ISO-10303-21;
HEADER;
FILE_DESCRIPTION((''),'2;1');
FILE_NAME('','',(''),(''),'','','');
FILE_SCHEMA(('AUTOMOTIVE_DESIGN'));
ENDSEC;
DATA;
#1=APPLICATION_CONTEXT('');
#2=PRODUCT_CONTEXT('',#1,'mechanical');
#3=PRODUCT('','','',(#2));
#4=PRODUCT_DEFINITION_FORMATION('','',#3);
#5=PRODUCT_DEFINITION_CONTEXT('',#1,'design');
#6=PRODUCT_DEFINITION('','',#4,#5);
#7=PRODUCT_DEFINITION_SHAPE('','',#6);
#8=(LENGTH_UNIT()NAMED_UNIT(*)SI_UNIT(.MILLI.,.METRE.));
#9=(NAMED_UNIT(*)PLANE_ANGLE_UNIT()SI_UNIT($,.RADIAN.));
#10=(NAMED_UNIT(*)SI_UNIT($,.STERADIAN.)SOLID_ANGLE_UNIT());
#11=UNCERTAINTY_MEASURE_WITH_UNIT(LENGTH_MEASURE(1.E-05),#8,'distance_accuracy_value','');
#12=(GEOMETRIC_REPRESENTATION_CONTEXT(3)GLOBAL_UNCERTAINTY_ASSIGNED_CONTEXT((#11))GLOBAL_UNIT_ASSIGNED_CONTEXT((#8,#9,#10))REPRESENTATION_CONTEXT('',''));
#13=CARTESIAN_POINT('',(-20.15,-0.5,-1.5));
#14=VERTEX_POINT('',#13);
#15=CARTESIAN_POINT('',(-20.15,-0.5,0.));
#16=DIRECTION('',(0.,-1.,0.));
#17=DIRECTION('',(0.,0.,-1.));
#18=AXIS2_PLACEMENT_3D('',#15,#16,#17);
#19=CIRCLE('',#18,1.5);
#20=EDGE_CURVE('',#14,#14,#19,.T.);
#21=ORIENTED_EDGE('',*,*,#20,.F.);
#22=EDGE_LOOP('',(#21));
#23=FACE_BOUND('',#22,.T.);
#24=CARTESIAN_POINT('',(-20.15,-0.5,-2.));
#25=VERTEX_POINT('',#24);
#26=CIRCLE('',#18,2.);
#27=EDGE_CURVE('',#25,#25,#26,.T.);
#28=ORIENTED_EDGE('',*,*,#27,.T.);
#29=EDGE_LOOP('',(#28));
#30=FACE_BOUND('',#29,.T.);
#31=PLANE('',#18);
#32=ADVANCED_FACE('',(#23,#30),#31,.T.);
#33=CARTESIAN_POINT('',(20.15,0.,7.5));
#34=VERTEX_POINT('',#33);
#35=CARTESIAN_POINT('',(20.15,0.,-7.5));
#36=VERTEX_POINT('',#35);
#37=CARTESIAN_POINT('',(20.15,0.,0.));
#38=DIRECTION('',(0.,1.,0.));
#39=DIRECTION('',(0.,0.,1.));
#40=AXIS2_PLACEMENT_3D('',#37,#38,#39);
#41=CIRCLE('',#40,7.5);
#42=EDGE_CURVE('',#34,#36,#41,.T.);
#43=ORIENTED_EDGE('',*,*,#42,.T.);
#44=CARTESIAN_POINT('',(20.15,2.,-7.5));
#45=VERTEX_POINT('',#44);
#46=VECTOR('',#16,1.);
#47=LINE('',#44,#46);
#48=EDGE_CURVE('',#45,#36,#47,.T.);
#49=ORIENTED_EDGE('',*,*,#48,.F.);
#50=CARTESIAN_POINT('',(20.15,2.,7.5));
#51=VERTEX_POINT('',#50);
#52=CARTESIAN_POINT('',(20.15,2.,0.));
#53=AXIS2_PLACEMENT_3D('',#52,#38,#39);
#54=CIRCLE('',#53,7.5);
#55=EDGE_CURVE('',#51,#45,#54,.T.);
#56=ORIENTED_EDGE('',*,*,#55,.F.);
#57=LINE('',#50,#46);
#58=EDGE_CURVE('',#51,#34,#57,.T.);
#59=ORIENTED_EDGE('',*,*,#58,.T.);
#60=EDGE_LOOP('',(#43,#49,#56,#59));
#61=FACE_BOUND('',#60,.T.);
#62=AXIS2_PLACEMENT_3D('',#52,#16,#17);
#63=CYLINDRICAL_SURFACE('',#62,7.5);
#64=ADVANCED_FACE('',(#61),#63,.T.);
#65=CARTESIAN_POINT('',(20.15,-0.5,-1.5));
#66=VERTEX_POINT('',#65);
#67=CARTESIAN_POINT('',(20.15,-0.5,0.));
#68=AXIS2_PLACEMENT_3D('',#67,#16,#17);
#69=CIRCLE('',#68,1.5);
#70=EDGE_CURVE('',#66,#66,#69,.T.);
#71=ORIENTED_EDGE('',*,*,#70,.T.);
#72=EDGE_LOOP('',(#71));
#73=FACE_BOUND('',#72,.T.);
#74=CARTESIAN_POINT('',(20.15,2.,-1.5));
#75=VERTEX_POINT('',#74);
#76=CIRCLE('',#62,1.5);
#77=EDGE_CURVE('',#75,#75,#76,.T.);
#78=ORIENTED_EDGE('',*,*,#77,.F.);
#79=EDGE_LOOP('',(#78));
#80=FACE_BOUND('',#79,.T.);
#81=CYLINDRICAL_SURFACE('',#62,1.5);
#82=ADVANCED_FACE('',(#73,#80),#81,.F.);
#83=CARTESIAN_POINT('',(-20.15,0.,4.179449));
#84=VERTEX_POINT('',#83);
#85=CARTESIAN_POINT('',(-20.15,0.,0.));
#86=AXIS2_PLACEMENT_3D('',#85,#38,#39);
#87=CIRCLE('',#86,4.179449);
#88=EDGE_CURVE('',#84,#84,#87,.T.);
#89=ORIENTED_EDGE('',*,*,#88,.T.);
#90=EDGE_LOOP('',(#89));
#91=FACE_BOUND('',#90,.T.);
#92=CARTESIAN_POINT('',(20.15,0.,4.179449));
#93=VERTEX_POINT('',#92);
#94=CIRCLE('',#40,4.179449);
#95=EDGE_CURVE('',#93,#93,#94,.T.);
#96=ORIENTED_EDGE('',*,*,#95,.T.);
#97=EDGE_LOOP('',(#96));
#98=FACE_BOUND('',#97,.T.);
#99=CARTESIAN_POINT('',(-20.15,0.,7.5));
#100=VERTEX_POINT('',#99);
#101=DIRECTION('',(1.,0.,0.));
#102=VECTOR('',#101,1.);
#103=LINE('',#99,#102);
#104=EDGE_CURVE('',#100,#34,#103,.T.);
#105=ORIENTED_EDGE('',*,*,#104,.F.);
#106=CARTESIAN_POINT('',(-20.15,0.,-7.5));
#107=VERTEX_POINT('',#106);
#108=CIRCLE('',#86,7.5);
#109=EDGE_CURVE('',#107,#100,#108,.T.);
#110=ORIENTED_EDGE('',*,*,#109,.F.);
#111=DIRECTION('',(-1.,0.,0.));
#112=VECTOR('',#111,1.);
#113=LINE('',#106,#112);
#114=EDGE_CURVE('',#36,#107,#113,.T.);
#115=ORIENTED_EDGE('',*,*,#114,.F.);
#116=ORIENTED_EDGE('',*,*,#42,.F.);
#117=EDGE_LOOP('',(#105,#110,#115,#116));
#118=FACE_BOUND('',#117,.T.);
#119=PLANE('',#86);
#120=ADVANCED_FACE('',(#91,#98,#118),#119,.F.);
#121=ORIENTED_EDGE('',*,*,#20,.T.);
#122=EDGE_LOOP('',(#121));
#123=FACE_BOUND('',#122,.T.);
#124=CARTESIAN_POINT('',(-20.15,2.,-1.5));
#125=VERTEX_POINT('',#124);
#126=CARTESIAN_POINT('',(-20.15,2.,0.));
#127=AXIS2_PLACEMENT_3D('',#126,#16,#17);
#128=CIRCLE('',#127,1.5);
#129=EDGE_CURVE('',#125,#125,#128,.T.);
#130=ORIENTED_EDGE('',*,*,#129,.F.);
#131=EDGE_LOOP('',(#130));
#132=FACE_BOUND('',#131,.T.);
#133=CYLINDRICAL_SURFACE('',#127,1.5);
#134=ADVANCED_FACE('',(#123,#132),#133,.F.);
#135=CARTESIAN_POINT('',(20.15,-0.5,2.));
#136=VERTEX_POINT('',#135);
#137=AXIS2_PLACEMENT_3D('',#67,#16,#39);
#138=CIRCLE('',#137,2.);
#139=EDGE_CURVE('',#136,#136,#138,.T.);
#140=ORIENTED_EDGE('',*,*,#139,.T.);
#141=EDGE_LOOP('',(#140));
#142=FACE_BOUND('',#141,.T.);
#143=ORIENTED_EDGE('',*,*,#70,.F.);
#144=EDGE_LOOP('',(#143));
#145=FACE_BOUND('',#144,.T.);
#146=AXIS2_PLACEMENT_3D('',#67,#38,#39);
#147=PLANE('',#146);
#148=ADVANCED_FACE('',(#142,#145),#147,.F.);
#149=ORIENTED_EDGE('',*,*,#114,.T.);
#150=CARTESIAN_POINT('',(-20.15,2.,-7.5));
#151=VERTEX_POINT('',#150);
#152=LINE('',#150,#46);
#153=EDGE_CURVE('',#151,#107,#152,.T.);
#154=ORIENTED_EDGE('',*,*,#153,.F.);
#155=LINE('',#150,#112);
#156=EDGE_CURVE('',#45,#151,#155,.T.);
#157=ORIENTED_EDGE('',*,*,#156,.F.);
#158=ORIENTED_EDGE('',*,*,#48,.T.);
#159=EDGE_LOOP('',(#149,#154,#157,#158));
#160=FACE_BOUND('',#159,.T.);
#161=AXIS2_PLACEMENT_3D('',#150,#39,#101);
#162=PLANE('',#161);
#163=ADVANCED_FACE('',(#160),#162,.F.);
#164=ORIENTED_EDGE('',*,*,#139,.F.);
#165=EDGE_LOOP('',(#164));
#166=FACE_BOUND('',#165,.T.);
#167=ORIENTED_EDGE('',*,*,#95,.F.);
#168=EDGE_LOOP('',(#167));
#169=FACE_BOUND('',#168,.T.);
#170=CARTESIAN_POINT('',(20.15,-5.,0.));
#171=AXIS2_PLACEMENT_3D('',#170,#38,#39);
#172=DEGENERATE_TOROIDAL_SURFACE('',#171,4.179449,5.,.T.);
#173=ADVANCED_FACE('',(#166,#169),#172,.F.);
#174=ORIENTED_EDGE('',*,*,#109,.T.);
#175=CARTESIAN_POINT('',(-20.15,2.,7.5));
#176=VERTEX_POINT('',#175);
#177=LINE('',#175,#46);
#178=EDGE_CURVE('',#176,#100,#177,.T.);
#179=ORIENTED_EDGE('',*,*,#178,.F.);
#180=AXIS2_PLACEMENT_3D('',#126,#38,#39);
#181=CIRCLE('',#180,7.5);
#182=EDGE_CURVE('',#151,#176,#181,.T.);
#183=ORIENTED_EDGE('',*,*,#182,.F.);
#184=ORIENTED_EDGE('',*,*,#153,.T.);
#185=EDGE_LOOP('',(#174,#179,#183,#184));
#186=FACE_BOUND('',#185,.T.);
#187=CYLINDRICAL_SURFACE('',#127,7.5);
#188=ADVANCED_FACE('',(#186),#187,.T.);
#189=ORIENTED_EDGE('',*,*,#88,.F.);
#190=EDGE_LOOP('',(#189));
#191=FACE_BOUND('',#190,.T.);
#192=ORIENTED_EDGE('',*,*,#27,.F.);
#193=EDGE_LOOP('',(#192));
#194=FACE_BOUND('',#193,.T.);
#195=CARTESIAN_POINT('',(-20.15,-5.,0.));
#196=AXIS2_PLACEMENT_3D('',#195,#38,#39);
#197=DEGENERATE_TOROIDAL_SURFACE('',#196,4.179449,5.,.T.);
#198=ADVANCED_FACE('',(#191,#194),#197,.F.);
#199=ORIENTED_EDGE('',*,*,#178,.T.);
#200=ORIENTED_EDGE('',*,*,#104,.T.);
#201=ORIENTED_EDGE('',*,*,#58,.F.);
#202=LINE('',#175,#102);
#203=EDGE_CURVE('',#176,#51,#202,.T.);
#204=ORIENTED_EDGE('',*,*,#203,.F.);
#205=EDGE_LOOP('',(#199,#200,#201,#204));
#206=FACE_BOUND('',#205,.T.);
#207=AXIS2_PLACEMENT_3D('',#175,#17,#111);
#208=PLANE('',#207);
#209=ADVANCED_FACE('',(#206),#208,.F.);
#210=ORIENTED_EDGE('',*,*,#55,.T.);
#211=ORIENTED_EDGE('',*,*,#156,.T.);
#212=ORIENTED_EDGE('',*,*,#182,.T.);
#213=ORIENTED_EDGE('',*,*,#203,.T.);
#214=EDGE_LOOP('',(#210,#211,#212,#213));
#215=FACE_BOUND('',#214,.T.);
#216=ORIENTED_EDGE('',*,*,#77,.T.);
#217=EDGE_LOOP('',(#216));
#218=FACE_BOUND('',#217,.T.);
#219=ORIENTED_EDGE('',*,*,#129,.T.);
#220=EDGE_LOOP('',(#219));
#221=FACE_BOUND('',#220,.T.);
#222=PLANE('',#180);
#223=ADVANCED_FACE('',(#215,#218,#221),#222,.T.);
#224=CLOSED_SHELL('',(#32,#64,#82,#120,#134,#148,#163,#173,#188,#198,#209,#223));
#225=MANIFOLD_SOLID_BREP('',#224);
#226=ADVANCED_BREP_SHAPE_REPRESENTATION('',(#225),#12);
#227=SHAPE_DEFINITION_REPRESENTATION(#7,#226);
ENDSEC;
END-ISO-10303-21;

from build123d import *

# Parameters (mm, degrees)
BOSS_EXTRUDE1_DEPTH = 2
SKETCH2_R           = 1.5
CUT_EXTRUDE1_DEPTH  = 29.718852693
BOSS_EXTRUDE2_START = 0.5
SKETCH3_R           = 2
SKETCH3_R_2         = 1.5
BOSS_EXTRUDE2_DEPTH = 0.5
FILLET1_R           = 5


with BuildPart() as part:
    # Sketch1 → Boss-Extrude1 (new body)
    with BuildSketch(Plane(origin=(0, 0, 0), x_dir=(1, 0, 0), z_dir=(0, 1, 0))):
        with BuildLine():
            Line((-20.15, 7.5), (20.15, 7.5))
            ThreePointArc((20.15, 7.5), (27.65, 0), (20.15, -7.5))
            Line((20.15, -7.5), (-20.15, -7.5))
            ThreePointArc((-20.15, -7.5), (-27.65, 0), (-20.15, 7.5))
        make_face()
    extrude(amount=BOSS_EXTRUDE1_DEPTH)

    # Sketch2 → Cut-Extrude1 (cut, through all)
    with BuildSketch(Plane.XZ):
        with Locations(Location((-20.15, 0, 0), (0, 0, 270))):
            Circle(SKETCH2_R)
        with Locations(Location((20.15, 0, 0), (0, 0, 270))):
            Circle(SKETCH2_R)
    extrude(amount=-CUT_EXTRUDE1_DEPTH, mode=Mode.SUBTRACT)

    # Sketch3 → Boss-Extrude2 (add)
    # profile 1 of 2: a face of its own
    with BuildSketch(Plane.XZ.offset(BOSS_EXTRUDE2_START)):
        with Locations(Location((-20.15, 0, 0), (0, 0, 90))):
            Circle(SKETCH3_R)
        with Locations(Location((-20.15, 0, 0), (0, 0, 270))):
            Circle(SKETCH3_R_2, mode=Mode.SUBTRACT)
    # profile 2 of 2: a face of its own
    with BuildSketch(Plane.XZ.offset(BOSS_EXTRUDE2_START)):
        with Locations(Location((20.15, 0, 0), (0, 0, 90))):
            Circle(SKETCH3_R)
        with Locations(Location((20.15, 0, 0), (0, 0, 270))):
            Circle(SKETCH3_R_2, mode=Mode.SUBTRACT)
    extrude(amount=-BOSS_EXTRUDE2_DEPTH)

    # Fillet1
    # the kernel refuses this fillet: 5 mm, written as the material it adds along each edge
    with BuildSketch(Plane(origin=(-20.15, 0, 0), x_dir=(0, 0, 1), z_dir=(1, 0, 0))) as fillet1_piece_1:
        with BuildLine():
            CenterArc((4.179449472, 5), FILLET1_R, 244.158067237, 25.841932763)
            Line((4.179449472, 0), (4.179449472, -0.1))
            Line((4.179449472, -0.1), (2, -0.1))
            Line((2, -0.1), (1.9, 0))
            ThreePointArc((1.9, 0), (1.9, 0.25), (1.956411011, 0.41))
            Line((1.956411011, 0.41), (2, 0.5))
        make_face()
    revolve(axis=Axis((-20.15, 0, 0), (0, -1, 0)))
    with BuildSketch(Plane(origin=(20.15, 0, 0), x_dir=(0, 0, 1), z_dir=(1, 0, 0))) as fillet1_piece_2:
        with BuildLine():
            CenterArc((4.179449472, 5), FILLET1_R, 244.158067237, 25.841932763)
            Line((4.179449472, 0), (4.179449472, -0.1))
            Line((4.179449472, -0.1), (2, -0.1))
            Line((2, -0.1), (1.9, 0))
            ThreePointArc((1.9, 0), (1.9, 0.25), (1.956411011, 0.41))
            Line((1.956411011, 0.41), (2, 0.5))
        make_face()
    revolve(axis=Axis((20.15, 0, 0), (0, -1, 0)))


solid = part.part
